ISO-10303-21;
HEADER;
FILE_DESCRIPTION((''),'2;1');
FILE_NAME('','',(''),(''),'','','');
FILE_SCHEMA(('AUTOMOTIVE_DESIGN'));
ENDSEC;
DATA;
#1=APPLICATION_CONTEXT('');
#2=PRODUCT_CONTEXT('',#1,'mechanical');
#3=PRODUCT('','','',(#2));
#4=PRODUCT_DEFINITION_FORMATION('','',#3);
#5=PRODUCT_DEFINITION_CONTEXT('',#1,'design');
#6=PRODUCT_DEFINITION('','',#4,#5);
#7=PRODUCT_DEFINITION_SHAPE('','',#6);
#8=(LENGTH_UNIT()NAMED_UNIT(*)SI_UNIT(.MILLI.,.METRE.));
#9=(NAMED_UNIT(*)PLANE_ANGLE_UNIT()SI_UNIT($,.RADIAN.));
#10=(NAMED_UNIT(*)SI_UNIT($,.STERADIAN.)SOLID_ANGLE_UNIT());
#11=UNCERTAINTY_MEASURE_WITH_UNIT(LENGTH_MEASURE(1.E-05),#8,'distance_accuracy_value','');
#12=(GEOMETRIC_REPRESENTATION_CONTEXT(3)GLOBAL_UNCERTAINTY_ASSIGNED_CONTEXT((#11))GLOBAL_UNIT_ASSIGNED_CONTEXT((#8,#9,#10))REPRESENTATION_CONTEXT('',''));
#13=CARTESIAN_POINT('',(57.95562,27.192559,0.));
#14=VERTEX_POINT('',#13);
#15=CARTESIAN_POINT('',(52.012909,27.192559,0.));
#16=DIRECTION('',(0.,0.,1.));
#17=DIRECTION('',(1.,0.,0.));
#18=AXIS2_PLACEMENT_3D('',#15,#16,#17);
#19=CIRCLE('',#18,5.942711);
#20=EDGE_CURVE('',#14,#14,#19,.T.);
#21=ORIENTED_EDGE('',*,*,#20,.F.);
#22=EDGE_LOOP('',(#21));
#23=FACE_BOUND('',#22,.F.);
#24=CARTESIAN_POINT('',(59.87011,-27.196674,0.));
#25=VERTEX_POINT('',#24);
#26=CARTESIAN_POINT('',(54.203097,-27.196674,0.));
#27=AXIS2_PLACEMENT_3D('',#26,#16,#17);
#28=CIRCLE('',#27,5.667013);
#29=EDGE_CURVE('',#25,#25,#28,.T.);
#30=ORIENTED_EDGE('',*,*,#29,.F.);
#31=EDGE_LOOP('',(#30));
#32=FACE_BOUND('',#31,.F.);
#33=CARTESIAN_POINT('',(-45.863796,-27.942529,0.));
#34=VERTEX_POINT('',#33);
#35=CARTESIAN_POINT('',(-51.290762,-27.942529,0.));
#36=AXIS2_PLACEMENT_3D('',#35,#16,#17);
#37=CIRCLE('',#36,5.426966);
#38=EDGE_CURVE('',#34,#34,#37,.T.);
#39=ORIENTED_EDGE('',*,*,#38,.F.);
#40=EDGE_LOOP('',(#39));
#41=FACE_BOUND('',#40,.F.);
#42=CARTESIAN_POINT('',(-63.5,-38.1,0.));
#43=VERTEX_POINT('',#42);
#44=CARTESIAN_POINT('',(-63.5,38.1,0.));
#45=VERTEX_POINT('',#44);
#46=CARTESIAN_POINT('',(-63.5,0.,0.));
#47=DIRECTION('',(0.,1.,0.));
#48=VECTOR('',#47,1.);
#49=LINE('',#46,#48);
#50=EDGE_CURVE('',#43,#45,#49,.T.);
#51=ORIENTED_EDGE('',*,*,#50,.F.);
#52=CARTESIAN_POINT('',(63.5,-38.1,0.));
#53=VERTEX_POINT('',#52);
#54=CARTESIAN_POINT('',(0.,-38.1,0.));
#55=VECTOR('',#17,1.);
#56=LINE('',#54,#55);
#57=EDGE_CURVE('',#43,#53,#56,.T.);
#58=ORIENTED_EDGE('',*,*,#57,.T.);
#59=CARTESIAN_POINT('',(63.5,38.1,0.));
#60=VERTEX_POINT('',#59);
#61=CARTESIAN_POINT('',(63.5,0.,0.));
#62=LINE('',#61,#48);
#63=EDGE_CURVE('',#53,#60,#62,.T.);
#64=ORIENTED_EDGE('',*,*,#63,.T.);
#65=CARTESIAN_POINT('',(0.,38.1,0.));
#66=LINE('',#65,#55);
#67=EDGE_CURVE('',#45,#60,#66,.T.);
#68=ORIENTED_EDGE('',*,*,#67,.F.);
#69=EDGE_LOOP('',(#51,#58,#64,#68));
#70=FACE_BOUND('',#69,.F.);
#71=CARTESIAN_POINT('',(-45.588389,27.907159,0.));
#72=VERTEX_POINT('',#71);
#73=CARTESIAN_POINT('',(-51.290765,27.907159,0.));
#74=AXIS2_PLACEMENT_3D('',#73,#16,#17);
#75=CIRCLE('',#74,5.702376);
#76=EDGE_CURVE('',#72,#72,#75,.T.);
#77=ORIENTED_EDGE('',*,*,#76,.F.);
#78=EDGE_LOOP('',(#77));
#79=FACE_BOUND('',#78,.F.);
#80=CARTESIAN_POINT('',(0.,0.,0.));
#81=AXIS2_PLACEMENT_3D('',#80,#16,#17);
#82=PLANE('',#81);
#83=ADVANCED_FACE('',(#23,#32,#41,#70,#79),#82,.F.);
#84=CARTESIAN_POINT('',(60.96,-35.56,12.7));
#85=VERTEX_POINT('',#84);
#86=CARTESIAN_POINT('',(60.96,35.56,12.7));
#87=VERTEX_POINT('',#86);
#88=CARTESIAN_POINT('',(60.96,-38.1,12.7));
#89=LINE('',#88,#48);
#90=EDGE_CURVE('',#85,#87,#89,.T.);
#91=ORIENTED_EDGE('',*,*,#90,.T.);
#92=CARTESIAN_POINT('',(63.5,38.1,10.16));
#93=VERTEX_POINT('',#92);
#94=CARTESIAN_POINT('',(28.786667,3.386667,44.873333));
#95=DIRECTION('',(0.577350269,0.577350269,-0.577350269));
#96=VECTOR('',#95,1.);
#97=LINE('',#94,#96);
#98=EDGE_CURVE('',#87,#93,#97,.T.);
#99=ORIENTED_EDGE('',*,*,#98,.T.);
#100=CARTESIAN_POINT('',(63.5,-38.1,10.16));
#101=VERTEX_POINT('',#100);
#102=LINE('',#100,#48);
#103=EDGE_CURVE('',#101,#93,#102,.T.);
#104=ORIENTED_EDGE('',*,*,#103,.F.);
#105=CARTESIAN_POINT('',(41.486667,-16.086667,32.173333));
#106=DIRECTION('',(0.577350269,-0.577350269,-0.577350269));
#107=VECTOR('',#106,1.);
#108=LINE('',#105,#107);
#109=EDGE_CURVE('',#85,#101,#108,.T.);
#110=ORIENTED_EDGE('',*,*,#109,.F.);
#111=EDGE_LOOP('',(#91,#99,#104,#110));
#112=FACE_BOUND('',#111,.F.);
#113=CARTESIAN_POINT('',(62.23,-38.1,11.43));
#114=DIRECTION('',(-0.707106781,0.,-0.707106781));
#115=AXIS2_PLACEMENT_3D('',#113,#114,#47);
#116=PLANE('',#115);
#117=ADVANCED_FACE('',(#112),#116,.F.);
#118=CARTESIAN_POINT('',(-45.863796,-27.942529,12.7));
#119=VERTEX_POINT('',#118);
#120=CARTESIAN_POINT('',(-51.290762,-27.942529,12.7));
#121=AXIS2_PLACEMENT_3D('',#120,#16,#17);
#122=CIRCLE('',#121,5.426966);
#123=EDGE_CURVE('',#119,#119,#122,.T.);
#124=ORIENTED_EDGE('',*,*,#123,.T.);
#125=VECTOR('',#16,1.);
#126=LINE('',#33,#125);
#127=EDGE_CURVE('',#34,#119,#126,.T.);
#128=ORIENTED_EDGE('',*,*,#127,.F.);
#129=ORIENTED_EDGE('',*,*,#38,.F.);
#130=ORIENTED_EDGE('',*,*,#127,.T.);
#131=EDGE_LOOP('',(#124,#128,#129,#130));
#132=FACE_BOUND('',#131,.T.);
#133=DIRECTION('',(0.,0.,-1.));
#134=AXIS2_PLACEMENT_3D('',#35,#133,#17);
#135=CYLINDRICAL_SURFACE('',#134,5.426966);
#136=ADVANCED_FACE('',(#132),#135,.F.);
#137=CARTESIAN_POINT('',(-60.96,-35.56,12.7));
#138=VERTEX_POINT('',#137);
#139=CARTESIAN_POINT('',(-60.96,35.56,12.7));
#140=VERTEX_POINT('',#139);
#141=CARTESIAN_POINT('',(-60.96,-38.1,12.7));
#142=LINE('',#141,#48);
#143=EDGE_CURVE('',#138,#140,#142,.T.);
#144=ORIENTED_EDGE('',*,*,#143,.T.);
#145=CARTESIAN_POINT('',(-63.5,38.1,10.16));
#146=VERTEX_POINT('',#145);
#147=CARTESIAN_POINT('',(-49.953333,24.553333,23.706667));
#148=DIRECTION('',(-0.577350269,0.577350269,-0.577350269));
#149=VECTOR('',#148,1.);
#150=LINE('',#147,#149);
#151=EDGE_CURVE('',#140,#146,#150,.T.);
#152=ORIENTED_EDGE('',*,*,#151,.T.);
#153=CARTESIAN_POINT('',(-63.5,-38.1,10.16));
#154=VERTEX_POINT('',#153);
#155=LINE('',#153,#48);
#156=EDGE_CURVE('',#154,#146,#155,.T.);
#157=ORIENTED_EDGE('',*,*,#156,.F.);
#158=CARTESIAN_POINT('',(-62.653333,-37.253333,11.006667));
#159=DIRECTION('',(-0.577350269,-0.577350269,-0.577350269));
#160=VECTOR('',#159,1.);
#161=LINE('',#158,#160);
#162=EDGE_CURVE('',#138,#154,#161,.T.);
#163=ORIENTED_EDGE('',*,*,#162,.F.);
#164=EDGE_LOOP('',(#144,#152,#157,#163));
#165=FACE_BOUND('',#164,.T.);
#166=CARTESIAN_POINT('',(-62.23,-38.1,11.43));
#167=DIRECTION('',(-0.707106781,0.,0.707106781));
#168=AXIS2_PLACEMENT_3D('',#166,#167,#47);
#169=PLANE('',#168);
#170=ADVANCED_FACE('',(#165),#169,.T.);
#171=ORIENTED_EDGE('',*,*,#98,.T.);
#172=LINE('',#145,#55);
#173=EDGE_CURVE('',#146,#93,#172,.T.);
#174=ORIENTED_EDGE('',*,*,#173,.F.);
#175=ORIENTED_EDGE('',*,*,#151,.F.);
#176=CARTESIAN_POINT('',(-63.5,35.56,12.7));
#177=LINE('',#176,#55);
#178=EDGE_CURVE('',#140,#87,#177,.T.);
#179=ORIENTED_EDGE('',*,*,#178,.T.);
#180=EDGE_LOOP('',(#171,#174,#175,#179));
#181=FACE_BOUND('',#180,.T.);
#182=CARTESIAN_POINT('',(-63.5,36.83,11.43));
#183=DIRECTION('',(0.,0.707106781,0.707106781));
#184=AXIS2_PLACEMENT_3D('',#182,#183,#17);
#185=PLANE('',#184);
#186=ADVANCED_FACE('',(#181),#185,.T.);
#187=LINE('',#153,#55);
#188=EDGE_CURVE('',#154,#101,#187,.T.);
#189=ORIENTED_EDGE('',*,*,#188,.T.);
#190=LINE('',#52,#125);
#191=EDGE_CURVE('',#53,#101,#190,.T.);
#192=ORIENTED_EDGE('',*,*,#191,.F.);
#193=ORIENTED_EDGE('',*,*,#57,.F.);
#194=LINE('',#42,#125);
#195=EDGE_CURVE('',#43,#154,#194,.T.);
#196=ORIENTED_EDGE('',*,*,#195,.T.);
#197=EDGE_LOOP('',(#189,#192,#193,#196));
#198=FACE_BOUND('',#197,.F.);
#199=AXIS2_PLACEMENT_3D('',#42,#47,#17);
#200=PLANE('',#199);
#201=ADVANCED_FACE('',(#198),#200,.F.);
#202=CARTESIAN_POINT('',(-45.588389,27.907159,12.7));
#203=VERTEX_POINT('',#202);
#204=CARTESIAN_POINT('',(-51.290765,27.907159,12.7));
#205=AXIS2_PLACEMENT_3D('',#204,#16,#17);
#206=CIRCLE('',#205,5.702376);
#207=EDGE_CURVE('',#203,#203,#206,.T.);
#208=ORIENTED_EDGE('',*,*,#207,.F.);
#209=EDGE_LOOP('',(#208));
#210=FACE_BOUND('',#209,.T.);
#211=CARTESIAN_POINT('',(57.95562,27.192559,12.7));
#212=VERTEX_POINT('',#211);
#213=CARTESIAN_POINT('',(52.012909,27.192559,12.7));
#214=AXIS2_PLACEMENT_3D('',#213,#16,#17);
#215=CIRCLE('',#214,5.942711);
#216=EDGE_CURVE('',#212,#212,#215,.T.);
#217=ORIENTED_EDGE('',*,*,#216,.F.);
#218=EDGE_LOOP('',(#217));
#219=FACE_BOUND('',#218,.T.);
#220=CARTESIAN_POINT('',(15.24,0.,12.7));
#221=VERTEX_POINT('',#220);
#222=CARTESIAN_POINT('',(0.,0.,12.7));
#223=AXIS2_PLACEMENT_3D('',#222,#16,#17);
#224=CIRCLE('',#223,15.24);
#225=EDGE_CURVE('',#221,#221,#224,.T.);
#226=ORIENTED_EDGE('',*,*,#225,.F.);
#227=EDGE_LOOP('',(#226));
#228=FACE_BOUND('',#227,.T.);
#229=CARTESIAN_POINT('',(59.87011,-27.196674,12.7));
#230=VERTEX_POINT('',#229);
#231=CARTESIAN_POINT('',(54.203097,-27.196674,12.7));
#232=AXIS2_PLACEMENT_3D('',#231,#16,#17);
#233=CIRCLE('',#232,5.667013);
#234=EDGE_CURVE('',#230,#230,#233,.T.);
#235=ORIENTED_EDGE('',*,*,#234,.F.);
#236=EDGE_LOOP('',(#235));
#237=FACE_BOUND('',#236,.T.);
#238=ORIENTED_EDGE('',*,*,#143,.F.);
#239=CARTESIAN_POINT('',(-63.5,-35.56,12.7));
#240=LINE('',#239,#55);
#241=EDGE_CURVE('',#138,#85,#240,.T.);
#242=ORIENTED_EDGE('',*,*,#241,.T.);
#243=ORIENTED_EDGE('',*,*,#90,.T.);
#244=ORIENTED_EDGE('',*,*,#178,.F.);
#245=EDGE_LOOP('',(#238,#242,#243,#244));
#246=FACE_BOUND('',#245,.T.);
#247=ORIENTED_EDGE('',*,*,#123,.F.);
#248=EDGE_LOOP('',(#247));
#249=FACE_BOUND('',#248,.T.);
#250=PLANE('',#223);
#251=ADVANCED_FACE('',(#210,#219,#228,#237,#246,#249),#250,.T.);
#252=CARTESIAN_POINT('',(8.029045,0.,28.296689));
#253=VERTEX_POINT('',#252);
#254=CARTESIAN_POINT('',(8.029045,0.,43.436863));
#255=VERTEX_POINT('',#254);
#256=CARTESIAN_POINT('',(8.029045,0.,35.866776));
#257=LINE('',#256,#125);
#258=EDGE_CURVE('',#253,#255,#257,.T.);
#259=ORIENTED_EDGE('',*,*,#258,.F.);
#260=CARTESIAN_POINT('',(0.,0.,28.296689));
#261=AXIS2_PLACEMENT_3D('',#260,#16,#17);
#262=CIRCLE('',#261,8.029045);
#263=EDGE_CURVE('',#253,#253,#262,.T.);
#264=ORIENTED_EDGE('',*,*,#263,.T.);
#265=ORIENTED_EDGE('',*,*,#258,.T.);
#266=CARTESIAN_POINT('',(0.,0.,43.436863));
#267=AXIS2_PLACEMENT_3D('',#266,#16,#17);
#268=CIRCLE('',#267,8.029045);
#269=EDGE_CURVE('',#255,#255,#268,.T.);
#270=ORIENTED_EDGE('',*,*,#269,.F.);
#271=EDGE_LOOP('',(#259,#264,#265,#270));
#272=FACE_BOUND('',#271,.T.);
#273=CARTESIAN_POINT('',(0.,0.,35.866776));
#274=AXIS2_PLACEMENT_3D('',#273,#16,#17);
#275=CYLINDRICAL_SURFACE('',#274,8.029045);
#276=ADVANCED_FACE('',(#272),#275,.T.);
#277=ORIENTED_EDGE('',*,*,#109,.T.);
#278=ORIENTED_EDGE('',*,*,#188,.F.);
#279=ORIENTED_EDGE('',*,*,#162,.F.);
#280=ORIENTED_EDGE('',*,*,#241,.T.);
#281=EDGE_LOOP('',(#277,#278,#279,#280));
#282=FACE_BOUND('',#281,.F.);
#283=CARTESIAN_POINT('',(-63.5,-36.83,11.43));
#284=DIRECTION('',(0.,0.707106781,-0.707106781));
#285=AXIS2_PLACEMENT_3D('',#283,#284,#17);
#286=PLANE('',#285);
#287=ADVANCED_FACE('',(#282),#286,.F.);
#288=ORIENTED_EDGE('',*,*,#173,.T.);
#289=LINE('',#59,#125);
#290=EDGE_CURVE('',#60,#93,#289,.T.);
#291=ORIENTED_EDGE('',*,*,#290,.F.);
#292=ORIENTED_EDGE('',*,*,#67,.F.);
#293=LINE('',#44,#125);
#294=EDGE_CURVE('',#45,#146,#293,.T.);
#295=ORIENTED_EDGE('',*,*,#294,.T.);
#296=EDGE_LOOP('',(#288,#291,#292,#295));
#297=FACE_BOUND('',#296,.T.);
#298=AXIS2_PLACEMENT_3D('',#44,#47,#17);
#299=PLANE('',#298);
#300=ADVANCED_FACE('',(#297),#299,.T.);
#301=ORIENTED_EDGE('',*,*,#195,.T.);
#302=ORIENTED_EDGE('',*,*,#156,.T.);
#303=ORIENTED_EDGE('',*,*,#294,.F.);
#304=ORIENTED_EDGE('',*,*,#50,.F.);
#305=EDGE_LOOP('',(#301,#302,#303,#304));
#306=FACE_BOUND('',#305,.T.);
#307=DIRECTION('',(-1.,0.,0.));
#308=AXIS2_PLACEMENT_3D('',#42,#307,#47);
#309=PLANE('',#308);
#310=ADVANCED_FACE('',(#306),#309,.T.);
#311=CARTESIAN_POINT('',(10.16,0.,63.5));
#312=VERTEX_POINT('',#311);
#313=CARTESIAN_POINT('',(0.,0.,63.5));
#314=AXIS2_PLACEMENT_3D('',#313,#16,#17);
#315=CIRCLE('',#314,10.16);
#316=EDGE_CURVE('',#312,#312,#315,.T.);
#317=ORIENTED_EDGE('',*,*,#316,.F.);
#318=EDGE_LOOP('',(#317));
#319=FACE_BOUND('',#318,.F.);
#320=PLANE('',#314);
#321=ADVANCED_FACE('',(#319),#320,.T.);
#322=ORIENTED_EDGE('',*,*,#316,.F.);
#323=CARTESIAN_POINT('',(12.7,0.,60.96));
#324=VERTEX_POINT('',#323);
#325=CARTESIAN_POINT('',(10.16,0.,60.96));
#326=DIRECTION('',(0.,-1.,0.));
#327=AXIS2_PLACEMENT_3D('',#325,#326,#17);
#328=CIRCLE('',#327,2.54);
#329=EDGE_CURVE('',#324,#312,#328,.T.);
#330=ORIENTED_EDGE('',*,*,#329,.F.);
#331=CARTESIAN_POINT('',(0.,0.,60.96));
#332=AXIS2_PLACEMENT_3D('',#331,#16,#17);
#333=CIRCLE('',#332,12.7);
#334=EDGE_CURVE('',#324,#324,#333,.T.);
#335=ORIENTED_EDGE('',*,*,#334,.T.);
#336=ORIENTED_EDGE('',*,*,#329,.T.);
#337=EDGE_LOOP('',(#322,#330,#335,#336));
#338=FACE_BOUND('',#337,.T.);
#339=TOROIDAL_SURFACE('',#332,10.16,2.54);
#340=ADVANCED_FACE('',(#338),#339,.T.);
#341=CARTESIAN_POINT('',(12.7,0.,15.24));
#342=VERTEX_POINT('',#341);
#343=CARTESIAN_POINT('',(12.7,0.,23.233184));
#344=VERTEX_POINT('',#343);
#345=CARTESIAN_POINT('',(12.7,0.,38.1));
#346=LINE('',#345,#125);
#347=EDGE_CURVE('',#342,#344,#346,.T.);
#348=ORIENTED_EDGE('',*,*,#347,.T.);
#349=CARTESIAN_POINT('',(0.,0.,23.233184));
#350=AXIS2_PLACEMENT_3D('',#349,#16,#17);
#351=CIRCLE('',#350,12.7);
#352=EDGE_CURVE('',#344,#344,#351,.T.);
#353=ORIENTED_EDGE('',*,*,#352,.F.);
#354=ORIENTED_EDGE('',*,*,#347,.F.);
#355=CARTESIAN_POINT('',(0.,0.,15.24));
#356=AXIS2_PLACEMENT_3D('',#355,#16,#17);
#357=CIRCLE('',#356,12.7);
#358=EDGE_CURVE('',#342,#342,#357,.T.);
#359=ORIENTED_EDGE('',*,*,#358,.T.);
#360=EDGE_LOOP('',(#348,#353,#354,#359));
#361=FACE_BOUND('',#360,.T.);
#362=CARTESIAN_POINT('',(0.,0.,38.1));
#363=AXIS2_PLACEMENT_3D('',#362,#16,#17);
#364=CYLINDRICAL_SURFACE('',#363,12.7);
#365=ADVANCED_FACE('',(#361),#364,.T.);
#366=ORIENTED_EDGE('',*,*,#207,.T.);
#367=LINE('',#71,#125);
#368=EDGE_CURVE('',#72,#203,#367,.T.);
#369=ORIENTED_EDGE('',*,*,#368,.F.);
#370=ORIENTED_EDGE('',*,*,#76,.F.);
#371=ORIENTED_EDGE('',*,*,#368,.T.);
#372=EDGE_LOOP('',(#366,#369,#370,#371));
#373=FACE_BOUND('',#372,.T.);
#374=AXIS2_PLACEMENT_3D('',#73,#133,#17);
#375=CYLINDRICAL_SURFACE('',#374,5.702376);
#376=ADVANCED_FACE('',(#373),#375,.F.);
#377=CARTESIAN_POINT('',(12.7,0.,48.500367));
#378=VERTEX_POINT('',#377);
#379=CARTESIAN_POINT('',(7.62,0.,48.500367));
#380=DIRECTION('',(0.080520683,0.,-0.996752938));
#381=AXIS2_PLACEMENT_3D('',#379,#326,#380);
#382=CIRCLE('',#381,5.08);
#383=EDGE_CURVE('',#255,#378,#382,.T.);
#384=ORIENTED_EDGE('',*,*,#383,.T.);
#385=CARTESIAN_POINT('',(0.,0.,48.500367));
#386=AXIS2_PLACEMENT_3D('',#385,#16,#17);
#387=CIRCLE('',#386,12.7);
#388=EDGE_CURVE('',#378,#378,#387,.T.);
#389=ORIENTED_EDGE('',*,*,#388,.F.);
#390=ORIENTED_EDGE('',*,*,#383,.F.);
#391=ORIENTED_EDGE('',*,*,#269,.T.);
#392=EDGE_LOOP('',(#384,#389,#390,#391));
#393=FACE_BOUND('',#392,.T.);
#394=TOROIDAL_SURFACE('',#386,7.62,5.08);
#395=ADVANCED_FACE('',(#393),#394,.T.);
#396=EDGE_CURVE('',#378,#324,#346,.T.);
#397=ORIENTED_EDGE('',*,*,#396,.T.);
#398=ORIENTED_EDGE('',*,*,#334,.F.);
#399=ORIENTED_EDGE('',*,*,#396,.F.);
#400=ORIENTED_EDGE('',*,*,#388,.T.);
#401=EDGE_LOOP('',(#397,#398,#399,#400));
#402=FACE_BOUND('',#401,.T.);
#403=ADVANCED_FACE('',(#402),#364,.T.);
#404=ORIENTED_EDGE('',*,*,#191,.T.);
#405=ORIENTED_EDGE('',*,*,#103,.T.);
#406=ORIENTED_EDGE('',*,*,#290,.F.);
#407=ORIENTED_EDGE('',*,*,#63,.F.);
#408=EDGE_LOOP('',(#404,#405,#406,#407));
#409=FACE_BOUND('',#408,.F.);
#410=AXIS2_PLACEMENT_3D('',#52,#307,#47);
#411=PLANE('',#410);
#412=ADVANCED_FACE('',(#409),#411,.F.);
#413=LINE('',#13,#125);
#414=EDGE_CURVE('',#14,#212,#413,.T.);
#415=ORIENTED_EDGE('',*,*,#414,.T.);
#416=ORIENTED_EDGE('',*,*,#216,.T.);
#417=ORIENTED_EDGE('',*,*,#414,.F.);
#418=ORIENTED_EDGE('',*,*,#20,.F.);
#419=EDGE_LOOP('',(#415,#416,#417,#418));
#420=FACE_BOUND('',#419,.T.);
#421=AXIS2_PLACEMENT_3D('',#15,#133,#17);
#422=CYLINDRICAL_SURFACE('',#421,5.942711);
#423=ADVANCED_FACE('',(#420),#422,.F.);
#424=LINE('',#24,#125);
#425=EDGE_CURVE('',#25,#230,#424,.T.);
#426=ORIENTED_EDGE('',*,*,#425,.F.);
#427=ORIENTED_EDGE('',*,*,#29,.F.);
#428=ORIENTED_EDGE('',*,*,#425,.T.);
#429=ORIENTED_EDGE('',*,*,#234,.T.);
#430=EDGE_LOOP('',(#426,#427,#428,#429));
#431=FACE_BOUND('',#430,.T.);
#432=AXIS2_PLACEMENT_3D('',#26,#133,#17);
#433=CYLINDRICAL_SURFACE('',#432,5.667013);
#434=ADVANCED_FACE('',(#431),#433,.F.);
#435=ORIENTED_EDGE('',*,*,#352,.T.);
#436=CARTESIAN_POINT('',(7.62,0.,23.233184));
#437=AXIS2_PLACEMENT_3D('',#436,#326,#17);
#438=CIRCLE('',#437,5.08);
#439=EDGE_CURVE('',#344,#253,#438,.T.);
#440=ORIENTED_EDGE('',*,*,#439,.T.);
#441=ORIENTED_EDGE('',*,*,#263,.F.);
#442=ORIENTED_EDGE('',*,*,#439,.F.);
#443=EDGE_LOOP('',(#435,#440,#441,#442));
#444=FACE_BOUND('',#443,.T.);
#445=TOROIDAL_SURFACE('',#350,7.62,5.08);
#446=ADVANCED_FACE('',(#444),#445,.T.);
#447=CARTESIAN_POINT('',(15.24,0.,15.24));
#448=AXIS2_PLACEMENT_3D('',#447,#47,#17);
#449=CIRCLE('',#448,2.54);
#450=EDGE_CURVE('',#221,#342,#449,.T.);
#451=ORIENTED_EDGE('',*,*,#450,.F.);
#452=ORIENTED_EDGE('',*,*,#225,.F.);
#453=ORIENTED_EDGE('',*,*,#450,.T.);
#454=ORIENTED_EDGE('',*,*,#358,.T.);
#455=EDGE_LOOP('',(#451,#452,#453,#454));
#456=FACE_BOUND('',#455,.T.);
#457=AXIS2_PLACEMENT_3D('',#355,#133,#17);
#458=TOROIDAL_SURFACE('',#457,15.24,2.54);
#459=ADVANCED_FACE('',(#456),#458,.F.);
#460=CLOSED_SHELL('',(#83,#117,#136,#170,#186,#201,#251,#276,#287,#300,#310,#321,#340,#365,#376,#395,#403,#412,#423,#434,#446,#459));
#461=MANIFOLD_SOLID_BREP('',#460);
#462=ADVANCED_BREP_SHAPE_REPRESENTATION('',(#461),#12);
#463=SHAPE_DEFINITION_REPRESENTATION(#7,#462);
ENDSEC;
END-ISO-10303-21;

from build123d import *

# Parameters (mm, degrees)
F0_W     = 127
F0_H     = 76.2
F1_DEPTH = 12.7
F2_R     = 5.9427105428
F2_R_2   = 5.6670127921
F2_R_3   = 5.7023762048
F2_R_4   = 5.4269658504
F3_DEPTH = 12.7
F4_W     = 12.7
F4_H     = 50.8
F6_W     = 9.3170334585
F6_H     = 15.1401739568
F8_R     = 2.54
F9_SIZE  = 2.54


# Not quite as in the source:
# - a fillet or chamfer that OpenCascade refuses, or shapes differently, is made with other operations: its cross-section is extruded or revolved along the edge and cut away or added


with BuildPart() as f1:
    # F0 (on Top) → F1 (new body)
    with BuildSketch(Plane.XY):
        Rectangle(F0_W, F0_H)
    extrude(amount=F1_DEPTH)

    # F2 (on Top) → F3 (cut)
    with BuildSketch(Plane.XY):
        with Locations((52.0129092038, 27.1925590932)):
            Circle(F2_R)
        with Locations((54.2030967772, -27.1966736764)):
            Circle(F2_R_2)
        with Locations((-51.2907654047, 27.9071591794)):
            Circle(F2_R_3)
        with Locations((-51.2907616794, -27.9425289482)):
            Circle(F2_R_4)
    extrude(amount=F3_DEPTH, mode=Mode.SUBTRACT)

    # F4 (on Front) → F5 (revolve)
    with BuildSketch(Plane.XZ):
        with Locations((6.35, 38.1)):
            Rectangle(F4_W, F4_H)
    revolve(axis=Axis((0, 0, 38.1), (0, 0, 1)))

    # F6 (on Front) → F7 (revolve, cut)
    with BuildSketch(Plane.XZ):
        with Locations((12.6875618007, 35.8667755499)):
            Rectangle(F6_W, F6_H)
    revolve(axis=Axis((0, 0, 12.7), (0, 0, 1)), mode=Mode.SUBTRACT)

    # F8
    f8_edges = [f1.edges().sort_by_distance(p)[0] for p in [
        (-12.7, 0, 63.5),
        (-12.7, 0, 12.7),
    ]]
    fillet(f8_edges, radius=F8_R)

    # F9
    f9_edges = [f1.edges().sort_by_distance(p)[0] for p in [
        (0, -38.1, 12.7),
        (0, 38.1, 12.7),
        (63.5, 0, 12.7),
        (-63.5, 0, 12.7),
    ]]
    chamfer(f9_edges, length=F9_SIZE)

    # F10: fillet of radius 5.08 on 2 edges, made by hand

    # F10_s1 → F10_t2 (revolve, cut)
    with BuildSketch(Plane.XZ):
        with BuildLine():
            ThreePointArc((8.0290450715, 43.4368625283), (11.3539221311, 45.0559189466), (12.7, 48.5003674537))
            Line((12.7, 48.5003674537), (12.7, 43.4368625283))
            Line((12.7, 43.4368625283), (8.0290450715, 43.4368625283))
        make_face()
    revolve(axis=Axis((0, 0, 43.4368625283), (0, 0, 1)), mode=Mode.SUBTRACT)

    # F10_s3 → F10_t4 (revolve, cut)
    with BuildSketch(Plane.XZ):
        with BuildLine():
            ThreePointArc((12.7, 23.2331836462), (11.3539221311, 26.6776321533), (8.0290450715, 28.2966885716))
            Line((8.0290450715, 28.2966885716), (12.7, 28.2966885716))
            Line((12.7, 28.2966885716), (12.7, 23.2331836462))
        make_face()
    revolve(axis=Axis((0, 0, 28.2966885716), (0, 0, 1)), mode=Mode.SUBTRACT)


solid = f1.part
